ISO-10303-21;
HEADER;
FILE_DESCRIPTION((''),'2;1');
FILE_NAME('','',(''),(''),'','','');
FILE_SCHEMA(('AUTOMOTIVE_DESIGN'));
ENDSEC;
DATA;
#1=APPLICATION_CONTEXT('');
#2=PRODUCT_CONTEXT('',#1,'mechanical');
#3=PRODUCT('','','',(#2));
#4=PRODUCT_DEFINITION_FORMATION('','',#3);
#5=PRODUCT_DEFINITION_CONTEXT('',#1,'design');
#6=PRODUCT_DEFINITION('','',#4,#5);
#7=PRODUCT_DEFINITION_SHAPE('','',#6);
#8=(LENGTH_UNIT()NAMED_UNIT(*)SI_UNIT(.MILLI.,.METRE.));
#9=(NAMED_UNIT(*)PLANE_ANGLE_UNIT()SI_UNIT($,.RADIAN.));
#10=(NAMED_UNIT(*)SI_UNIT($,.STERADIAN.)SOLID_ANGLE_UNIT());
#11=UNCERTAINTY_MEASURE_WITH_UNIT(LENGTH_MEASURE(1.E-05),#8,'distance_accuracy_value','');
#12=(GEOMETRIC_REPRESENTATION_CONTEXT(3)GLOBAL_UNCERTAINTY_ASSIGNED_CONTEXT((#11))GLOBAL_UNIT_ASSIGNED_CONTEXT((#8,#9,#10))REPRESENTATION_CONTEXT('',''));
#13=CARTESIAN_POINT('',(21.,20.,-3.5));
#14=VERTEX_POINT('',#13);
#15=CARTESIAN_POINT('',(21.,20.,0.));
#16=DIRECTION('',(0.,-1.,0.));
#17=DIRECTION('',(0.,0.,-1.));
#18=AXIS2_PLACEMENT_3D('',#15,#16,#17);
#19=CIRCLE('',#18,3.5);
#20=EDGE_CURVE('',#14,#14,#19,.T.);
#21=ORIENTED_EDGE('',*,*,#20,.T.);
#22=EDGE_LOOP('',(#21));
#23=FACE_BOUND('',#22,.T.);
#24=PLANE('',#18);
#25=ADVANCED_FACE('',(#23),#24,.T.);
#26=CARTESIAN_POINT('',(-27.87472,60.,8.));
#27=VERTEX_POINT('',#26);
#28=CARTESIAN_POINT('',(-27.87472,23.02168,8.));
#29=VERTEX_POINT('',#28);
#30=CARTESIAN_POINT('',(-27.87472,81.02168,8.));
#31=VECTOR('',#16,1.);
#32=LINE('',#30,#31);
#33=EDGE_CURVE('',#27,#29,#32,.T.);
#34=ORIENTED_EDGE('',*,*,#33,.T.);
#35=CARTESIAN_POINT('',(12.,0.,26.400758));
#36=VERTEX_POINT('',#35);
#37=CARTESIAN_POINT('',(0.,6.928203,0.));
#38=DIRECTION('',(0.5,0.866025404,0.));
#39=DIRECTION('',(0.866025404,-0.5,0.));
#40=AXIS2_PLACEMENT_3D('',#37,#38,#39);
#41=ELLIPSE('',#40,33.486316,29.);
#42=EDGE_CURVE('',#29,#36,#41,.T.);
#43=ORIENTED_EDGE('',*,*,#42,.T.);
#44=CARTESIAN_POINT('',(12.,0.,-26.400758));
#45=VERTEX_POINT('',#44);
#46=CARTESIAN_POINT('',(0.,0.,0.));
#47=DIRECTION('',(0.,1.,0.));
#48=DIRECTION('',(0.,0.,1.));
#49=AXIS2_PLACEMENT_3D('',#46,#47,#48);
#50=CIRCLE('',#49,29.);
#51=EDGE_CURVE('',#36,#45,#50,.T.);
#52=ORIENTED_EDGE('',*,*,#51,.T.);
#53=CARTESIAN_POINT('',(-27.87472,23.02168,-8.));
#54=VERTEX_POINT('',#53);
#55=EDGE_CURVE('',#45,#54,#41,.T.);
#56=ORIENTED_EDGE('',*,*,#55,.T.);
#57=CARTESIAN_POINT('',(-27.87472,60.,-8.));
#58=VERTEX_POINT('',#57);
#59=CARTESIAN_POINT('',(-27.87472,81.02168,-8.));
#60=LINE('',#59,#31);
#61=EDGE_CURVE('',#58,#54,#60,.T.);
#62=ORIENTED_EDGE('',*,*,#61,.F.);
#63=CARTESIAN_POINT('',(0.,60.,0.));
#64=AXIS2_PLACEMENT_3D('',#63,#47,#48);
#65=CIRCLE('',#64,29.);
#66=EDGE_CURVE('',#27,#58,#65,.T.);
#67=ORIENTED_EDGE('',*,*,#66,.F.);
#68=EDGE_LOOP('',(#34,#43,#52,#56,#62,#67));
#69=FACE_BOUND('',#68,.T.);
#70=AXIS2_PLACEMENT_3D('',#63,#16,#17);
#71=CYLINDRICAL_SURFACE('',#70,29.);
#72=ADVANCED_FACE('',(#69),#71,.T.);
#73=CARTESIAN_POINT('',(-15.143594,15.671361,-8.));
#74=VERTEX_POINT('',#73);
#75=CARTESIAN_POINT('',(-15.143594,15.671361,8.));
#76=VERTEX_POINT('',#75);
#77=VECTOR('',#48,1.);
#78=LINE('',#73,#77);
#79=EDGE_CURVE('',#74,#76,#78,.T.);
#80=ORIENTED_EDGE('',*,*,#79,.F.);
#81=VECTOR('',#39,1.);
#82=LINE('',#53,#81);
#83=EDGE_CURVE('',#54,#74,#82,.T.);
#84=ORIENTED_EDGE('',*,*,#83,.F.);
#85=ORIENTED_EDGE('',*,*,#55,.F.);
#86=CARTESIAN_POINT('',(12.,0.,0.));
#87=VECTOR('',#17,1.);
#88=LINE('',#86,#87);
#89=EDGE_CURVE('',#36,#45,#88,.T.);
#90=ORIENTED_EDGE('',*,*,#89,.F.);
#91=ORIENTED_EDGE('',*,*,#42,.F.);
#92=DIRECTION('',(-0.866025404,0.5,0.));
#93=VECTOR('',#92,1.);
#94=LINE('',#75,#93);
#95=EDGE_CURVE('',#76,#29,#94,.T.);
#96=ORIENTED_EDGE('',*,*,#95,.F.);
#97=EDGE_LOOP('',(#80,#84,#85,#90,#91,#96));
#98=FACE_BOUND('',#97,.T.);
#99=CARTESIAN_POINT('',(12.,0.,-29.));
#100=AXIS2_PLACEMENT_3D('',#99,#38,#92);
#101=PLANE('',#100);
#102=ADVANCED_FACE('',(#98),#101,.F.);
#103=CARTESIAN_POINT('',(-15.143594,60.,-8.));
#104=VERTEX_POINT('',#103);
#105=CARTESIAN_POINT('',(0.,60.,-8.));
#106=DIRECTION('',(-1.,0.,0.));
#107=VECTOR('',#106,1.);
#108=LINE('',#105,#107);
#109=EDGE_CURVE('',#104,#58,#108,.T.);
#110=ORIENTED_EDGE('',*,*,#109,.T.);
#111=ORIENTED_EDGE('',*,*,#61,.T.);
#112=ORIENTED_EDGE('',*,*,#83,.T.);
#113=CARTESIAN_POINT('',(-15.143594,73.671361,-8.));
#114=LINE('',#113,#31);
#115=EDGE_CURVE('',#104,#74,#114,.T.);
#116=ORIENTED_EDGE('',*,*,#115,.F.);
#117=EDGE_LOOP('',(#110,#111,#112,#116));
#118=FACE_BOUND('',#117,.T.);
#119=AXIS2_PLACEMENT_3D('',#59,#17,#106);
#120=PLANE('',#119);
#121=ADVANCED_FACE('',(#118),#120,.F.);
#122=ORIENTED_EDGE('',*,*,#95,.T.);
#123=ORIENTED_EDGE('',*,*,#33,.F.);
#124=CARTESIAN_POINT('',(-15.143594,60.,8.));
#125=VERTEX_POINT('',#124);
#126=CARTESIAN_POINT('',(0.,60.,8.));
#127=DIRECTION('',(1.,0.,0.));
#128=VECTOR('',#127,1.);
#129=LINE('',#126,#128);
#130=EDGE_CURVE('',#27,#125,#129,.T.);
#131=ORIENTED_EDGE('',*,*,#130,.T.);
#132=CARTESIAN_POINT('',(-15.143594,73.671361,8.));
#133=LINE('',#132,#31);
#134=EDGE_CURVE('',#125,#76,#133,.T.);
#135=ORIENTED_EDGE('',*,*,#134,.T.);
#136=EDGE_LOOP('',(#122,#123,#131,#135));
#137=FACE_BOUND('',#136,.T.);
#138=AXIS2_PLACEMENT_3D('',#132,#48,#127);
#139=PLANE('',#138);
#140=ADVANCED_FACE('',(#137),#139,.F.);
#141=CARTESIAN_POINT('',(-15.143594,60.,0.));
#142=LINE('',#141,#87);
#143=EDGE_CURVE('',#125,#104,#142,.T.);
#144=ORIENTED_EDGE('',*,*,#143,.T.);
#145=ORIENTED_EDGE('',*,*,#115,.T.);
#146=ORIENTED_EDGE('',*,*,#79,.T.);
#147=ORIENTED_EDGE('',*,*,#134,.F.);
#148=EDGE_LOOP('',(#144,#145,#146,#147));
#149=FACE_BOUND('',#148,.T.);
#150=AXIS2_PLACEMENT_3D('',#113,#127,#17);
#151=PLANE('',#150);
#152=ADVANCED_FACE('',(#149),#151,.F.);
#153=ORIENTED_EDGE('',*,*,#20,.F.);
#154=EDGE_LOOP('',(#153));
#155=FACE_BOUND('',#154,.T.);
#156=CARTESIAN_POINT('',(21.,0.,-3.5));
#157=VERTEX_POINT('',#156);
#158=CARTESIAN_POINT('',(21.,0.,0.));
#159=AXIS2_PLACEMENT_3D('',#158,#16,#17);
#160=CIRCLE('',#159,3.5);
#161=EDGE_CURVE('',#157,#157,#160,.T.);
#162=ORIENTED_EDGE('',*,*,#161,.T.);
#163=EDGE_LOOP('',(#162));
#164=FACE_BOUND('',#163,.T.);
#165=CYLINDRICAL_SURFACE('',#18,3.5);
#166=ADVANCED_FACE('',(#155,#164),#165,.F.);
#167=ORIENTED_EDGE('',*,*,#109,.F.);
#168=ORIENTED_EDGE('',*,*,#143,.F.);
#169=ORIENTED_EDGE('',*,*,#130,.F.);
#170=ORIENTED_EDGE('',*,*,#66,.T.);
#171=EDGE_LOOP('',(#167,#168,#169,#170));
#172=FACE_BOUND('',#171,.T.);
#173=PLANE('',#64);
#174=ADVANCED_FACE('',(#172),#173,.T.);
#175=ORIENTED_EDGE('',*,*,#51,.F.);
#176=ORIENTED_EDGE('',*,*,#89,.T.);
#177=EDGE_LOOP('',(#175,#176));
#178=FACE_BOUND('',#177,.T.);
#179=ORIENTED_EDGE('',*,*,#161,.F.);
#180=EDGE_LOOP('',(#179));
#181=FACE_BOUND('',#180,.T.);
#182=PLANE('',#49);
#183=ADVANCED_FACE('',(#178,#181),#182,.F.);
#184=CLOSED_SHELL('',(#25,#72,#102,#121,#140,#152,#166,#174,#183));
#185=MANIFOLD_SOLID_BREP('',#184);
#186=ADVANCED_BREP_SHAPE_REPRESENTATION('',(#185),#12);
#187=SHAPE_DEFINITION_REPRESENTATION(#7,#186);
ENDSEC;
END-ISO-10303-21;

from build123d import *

# Parameters (mm, degrees)
SKETCH5_R           = 29
BOSS_EXTRUDE2_DEPTH = 60
CUT_EXTRUDE1_DEPTH  = 58
CUT_EXTRUDE3_START  = -8
CUT_EXTRUDE3_DEPTH  = 16
SKETCH10_R          = 3.5
CUT_EXTRUDE4_DEPTH  = 20


# Read off the part's stored shape, not the designer's step: Cut-Extrude3
with BuildPart() as part:
    # Sketch5 → Boss-Extrude2 (new body)
    with BuildSketch(Plane(origin=(0, 0, 0), x_dir=(1, 0, 0), z_dir=(0, 1, 0))):
        with Locations(Location((0, 0, 0), (0, 0, 270))):
            Circle(SKETCH5_R)
    extrude(amount=BOSS_EXTRUDE2_DEPTH)

    # Sketch7 → Cut-Extrude1 (cut)
    with BuildSketch(Plane.XY.offset(29)):
        Polygon((12, 0), (-29, 23.671361037), (-29, 0), align=None)
    extrude(amount=-CUT_EXTRUDE1_DEPTH, mode=Mode.SUBTRACT)

    # Cut-Extrude3 outline → Cut-Extrude3 (cut)
    with BuildSketch(Plane.XY.offset(CUT_EXTRUDE3_START)):
        Polygon((-29, 23.671361037), (-15.143593539, 15.671361037), (-15.143593539, 60), (-30, 60), (-30, 24.248711306), align=None)
    extrude(amount=CUT_EXTRUDE3_DEPTH, mode=Mode.SUBTRACT)

    # Sketch10 → Cut-Extrude4 (cut)
    with BuildSketch(Plane.XZ):
        with Locations(Location((21, 0, 0), (0, 0, 270))):
            Circle(SKETCH10_R)
    extrude(amount=-CUT_EXTRUDE4_DEPTH, mode=Mode.SUBTRACT)


solid = part.part
